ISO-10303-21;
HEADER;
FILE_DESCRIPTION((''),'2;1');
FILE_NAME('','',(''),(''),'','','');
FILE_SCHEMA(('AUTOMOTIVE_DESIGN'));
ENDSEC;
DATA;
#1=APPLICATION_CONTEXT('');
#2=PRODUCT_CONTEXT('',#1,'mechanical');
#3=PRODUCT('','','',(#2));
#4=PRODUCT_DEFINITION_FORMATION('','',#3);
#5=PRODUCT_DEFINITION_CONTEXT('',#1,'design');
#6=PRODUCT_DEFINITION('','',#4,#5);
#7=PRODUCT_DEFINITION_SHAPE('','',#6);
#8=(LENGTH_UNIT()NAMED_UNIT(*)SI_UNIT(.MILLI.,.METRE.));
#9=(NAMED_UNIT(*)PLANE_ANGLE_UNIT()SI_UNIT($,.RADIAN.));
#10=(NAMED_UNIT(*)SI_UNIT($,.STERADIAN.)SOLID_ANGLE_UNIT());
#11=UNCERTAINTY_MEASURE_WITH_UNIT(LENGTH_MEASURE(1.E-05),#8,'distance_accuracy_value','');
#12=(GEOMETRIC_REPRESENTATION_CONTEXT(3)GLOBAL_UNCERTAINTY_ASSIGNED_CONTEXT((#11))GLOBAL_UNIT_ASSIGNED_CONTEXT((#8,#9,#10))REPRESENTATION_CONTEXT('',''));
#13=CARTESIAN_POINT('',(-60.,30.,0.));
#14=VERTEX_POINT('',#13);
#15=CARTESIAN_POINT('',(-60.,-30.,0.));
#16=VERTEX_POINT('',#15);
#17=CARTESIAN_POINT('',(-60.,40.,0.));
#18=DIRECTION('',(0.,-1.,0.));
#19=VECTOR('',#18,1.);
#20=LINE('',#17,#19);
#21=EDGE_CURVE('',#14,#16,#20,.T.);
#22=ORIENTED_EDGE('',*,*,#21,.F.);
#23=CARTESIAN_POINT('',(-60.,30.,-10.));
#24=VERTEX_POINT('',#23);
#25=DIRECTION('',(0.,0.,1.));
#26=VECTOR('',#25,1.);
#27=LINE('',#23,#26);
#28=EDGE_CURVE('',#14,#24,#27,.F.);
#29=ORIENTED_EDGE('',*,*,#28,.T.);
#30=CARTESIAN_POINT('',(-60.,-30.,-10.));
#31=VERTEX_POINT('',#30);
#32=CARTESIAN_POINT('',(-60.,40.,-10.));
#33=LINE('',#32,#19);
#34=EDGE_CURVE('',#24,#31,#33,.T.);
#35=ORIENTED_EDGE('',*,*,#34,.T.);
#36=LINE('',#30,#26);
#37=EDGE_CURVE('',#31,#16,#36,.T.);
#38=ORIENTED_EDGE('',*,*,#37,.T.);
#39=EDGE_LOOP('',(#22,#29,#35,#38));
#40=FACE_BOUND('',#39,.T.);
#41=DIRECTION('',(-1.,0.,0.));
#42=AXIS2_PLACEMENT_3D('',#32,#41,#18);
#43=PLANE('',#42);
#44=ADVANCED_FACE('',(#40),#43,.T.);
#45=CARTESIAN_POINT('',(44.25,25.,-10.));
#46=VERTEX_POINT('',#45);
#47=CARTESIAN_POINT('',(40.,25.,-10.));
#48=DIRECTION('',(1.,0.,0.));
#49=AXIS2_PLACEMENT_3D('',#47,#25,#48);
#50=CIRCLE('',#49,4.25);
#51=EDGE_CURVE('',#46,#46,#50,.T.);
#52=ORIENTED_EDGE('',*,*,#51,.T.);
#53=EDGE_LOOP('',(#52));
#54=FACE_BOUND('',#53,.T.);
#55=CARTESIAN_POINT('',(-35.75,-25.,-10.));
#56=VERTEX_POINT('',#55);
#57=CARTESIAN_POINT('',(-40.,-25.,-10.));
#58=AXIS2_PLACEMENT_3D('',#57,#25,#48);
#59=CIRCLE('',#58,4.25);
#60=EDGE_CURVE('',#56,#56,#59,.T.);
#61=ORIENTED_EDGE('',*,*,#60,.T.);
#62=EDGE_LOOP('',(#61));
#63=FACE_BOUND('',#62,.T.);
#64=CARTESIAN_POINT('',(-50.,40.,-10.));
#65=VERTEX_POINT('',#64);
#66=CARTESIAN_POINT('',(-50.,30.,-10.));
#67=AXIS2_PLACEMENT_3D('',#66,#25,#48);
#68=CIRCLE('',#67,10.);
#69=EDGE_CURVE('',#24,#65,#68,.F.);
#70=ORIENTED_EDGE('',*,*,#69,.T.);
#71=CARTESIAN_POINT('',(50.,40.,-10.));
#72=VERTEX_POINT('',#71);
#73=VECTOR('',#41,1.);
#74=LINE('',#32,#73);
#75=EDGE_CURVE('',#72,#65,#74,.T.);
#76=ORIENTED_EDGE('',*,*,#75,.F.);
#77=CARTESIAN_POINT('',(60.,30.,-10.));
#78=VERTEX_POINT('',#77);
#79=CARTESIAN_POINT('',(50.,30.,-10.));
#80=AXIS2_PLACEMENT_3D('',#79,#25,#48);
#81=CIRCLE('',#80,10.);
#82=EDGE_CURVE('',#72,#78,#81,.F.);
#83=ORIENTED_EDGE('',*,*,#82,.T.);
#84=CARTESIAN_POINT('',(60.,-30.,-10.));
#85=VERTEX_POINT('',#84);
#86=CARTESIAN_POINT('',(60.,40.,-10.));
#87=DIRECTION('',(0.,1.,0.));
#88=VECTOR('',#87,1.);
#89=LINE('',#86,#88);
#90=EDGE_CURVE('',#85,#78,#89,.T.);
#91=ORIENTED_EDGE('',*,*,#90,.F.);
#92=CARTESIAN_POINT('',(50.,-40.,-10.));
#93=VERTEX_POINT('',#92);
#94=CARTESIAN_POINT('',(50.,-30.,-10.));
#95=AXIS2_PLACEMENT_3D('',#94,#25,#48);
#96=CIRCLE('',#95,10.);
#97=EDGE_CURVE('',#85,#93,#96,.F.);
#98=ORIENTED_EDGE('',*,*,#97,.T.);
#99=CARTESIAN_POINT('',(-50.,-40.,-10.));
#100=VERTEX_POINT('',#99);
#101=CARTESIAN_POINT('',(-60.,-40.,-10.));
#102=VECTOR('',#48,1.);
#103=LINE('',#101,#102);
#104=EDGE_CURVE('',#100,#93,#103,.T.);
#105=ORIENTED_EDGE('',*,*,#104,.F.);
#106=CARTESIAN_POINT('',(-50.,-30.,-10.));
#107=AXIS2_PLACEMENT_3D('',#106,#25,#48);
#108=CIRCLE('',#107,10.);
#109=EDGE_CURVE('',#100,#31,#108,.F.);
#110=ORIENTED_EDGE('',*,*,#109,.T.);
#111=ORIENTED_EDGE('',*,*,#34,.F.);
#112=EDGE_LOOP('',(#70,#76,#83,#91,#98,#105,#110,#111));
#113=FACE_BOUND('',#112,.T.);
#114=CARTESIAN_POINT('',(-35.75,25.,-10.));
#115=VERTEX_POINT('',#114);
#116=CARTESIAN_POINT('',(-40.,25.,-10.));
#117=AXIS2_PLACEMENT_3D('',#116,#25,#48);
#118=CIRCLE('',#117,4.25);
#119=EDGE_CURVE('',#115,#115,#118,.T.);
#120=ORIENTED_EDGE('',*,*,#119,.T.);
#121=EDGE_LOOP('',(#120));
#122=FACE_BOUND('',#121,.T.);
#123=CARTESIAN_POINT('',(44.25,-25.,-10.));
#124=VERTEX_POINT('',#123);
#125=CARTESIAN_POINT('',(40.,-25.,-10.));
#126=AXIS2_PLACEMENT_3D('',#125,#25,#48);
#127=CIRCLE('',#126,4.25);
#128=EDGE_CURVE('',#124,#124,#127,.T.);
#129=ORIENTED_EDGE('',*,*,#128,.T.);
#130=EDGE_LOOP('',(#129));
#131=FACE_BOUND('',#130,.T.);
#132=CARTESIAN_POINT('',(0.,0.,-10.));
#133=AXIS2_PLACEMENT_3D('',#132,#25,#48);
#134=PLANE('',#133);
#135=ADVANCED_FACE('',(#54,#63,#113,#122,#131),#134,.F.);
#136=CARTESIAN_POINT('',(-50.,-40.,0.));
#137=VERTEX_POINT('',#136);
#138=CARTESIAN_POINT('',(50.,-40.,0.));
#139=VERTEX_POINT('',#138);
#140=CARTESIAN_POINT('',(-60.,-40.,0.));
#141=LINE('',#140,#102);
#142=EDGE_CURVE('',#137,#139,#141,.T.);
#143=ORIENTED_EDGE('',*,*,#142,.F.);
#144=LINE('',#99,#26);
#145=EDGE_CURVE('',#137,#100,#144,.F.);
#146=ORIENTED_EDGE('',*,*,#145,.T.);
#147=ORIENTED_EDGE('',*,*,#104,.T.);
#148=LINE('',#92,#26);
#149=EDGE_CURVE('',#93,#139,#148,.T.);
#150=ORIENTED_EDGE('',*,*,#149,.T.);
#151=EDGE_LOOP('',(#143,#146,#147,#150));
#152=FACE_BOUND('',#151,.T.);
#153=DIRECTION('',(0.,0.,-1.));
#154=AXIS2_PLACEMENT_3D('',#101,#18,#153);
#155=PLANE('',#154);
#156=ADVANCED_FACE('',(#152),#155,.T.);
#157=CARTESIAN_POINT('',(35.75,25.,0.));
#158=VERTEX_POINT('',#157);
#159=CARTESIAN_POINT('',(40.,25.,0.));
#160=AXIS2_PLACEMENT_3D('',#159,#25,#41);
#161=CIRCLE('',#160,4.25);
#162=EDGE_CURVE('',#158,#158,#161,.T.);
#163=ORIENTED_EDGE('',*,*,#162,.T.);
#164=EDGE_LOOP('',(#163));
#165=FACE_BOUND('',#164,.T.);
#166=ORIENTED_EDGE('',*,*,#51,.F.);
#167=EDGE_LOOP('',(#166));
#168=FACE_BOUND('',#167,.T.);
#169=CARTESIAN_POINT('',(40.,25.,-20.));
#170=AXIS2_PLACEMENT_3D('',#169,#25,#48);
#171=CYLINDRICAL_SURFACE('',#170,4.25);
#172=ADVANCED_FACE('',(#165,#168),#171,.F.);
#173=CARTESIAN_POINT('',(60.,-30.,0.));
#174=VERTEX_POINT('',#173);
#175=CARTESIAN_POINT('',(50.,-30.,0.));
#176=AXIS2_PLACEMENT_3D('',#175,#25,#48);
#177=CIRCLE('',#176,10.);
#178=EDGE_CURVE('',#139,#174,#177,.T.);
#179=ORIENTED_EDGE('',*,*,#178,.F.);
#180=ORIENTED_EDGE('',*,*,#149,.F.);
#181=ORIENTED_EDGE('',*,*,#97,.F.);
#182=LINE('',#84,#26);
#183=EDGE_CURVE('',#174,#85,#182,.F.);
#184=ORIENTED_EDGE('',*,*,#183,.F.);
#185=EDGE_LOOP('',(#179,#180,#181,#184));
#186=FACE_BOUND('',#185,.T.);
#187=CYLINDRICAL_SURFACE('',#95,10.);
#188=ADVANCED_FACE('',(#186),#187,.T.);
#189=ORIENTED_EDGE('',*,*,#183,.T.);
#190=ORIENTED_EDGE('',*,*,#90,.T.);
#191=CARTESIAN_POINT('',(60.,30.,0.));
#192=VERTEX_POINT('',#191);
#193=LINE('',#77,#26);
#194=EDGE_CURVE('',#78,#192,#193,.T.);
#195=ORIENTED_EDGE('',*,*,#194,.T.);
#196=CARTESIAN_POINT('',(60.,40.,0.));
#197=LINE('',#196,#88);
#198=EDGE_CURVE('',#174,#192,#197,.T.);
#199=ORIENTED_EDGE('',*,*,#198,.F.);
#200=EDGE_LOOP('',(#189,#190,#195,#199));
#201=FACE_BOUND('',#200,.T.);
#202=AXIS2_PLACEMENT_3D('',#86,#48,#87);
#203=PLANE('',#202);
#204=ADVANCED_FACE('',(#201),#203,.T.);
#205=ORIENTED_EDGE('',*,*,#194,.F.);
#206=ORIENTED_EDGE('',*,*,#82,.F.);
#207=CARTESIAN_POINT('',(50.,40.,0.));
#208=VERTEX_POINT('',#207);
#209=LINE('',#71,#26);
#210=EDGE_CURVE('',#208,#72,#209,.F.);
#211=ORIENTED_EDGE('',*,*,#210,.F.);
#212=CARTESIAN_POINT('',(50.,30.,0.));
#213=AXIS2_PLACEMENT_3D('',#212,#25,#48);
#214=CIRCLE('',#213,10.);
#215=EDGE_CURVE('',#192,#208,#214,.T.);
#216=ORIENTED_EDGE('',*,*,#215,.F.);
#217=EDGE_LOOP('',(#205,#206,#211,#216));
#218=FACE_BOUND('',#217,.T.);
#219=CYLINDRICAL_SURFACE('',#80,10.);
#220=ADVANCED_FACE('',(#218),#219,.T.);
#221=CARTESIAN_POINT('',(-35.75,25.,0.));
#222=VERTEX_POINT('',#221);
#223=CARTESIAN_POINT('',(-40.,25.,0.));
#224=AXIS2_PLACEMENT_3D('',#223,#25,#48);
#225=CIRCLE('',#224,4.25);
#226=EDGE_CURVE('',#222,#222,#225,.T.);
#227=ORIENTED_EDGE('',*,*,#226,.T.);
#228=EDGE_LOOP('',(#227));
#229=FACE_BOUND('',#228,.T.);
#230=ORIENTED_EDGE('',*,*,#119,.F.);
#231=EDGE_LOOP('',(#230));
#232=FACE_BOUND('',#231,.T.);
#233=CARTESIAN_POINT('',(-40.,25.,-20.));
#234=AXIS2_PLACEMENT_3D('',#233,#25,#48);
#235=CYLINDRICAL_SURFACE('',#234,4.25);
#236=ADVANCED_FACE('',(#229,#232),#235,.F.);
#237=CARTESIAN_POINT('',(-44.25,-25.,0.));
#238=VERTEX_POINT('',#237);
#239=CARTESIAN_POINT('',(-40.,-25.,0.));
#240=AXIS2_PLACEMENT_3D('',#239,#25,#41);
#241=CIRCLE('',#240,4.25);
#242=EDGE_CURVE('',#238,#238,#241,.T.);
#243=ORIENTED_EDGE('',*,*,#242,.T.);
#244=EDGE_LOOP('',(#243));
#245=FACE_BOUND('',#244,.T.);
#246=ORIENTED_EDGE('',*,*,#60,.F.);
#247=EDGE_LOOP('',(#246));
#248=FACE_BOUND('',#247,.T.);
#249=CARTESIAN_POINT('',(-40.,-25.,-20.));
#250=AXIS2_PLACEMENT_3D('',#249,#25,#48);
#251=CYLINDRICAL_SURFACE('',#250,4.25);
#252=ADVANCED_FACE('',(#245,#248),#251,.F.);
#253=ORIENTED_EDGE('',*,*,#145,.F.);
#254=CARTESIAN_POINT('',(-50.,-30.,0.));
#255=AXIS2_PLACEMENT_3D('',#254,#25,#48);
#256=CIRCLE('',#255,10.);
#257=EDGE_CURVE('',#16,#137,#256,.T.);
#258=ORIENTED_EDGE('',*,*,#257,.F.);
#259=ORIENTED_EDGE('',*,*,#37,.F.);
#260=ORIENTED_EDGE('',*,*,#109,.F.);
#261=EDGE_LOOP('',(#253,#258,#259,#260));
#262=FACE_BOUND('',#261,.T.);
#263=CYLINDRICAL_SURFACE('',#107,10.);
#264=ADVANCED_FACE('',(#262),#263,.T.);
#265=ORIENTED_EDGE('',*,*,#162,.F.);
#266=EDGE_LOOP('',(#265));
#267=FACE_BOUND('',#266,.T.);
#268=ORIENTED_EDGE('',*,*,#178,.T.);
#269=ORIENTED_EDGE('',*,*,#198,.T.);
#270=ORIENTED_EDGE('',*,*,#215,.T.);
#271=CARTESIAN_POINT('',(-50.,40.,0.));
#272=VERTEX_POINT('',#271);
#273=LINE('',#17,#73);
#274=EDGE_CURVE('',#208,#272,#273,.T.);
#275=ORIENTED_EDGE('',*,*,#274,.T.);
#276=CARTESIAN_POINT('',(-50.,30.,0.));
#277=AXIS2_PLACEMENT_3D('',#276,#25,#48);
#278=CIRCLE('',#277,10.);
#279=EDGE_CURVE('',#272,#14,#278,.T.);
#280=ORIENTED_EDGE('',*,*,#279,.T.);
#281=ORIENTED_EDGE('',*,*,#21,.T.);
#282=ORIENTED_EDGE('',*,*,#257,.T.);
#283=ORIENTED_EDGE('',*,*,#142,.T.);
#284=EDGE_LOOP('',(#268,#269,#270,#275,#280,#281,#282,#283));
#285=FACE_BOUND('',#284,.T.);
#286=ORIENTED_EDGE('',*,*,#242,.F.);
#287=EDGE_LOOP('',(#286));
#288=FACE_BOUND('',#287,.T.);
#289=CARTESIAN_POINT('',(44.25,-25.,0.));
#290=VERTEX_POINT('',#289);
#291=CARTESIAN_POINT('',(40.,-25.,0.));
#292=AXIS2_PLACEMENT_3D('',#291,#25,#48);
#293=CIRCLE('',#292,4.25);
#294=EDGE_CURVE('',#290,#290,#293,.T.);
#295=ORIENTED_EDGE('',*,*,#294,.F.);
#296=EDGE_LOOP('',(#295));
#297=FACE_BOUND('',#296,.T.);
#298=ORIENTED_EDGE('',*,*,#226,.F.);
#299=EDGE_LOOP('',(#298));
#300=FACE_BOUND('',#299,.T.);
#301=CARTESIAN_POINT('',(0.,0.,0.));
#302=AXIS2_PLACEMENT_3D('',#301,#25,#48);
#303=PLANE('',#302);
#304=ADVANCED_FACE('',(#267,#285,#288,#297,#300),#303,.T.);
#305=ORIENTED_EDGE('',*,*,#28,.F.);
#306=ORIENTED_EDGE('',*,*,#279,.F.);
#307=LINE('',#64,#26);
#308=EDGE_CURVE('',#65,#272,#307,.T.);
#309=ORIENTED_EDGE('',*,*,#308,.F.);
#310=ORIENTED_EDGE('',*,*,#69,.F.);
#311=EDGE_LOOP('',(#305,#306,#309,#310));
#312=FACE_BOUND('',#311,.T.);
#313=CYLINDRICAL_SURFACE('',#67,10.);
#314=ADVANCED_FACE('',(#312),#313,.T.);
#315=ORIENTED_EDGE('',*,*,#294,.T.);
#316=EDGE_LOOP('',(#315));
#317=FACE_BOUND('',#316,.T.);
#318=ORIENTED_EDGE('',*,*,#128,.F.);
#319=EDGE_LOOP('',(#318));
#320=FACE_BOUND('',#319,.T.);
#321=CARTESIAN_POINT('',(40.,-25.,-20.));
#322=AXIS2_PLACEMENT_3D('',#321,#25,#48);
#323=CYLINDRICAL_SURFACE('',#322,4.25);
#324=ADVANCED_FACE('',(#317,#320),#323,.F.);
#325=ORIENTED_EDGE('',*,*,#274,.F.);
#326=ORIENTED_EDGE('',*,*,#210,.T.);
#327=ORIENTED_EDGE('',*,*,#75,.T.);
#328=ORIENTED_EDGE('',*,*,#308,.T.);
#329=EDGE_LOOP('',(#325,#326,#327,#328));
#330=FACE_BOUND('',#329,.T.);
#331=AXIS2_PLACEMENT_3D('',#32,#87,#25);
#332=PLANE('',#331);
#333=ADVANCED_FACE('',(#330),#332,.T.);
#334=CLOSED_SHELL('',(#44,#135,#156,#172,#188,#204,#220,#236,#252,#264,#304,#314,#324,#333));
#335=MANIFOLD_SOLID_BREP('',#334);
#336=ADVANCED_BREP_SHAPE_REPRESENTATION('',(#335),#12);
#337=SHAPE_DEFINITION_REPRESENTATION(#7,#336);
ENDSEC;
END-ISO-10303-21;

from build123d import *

# Parameters (mm, degrees)
IZIM1_W               = 120
IZIM1_H               = 80
TABAN_FLAN_1_DEPTH    = 10
IZIM6_R               = 4.25
KES_EKSTR_ZYON1_DEPTH = 20
RADYUS1_R             = 10


# Sheet-metal steps are written as plain solids
with BuildPart() as part:
    # Çizim1 → Taban-Flanş1 (new body)
    with BuildSketch(Plane.XY):
        Rectangle(IZIM1_W, IZIM1_H)
    extrude(amount=-TABAN_FLAN_1_DEPTH)

    # Çizim6 → Kes-Ekstrüzyon1 (cut)
    with BuildSketch(Plane.XY):
        with Locations((-40, 25)):
            Circle(IZIM6_R)
        with Locations((40, 25)):
            Circle(IZIM6_R)
        with Locations((40, -25)):
            Circle(IZIM6_R)
        with Locations((-40, -25)):
            Circle(IZIM6_R)
    extrude(amount=-KES_EKSTR_ZYON1_DEPTH, mode=Mode.SUBTRACT)

    # Radyus1
    radyus1_edges = [part.edges().sort_by_distance(p)[0] for p in [
        (60, -40, -5),
        (-60, -40, -5),
        (-60, 40, -5),
        (60, 40, -5),
    ]]
    fillet(radyus1_edges, radius=RADYUS1_R)


solid = part.part
